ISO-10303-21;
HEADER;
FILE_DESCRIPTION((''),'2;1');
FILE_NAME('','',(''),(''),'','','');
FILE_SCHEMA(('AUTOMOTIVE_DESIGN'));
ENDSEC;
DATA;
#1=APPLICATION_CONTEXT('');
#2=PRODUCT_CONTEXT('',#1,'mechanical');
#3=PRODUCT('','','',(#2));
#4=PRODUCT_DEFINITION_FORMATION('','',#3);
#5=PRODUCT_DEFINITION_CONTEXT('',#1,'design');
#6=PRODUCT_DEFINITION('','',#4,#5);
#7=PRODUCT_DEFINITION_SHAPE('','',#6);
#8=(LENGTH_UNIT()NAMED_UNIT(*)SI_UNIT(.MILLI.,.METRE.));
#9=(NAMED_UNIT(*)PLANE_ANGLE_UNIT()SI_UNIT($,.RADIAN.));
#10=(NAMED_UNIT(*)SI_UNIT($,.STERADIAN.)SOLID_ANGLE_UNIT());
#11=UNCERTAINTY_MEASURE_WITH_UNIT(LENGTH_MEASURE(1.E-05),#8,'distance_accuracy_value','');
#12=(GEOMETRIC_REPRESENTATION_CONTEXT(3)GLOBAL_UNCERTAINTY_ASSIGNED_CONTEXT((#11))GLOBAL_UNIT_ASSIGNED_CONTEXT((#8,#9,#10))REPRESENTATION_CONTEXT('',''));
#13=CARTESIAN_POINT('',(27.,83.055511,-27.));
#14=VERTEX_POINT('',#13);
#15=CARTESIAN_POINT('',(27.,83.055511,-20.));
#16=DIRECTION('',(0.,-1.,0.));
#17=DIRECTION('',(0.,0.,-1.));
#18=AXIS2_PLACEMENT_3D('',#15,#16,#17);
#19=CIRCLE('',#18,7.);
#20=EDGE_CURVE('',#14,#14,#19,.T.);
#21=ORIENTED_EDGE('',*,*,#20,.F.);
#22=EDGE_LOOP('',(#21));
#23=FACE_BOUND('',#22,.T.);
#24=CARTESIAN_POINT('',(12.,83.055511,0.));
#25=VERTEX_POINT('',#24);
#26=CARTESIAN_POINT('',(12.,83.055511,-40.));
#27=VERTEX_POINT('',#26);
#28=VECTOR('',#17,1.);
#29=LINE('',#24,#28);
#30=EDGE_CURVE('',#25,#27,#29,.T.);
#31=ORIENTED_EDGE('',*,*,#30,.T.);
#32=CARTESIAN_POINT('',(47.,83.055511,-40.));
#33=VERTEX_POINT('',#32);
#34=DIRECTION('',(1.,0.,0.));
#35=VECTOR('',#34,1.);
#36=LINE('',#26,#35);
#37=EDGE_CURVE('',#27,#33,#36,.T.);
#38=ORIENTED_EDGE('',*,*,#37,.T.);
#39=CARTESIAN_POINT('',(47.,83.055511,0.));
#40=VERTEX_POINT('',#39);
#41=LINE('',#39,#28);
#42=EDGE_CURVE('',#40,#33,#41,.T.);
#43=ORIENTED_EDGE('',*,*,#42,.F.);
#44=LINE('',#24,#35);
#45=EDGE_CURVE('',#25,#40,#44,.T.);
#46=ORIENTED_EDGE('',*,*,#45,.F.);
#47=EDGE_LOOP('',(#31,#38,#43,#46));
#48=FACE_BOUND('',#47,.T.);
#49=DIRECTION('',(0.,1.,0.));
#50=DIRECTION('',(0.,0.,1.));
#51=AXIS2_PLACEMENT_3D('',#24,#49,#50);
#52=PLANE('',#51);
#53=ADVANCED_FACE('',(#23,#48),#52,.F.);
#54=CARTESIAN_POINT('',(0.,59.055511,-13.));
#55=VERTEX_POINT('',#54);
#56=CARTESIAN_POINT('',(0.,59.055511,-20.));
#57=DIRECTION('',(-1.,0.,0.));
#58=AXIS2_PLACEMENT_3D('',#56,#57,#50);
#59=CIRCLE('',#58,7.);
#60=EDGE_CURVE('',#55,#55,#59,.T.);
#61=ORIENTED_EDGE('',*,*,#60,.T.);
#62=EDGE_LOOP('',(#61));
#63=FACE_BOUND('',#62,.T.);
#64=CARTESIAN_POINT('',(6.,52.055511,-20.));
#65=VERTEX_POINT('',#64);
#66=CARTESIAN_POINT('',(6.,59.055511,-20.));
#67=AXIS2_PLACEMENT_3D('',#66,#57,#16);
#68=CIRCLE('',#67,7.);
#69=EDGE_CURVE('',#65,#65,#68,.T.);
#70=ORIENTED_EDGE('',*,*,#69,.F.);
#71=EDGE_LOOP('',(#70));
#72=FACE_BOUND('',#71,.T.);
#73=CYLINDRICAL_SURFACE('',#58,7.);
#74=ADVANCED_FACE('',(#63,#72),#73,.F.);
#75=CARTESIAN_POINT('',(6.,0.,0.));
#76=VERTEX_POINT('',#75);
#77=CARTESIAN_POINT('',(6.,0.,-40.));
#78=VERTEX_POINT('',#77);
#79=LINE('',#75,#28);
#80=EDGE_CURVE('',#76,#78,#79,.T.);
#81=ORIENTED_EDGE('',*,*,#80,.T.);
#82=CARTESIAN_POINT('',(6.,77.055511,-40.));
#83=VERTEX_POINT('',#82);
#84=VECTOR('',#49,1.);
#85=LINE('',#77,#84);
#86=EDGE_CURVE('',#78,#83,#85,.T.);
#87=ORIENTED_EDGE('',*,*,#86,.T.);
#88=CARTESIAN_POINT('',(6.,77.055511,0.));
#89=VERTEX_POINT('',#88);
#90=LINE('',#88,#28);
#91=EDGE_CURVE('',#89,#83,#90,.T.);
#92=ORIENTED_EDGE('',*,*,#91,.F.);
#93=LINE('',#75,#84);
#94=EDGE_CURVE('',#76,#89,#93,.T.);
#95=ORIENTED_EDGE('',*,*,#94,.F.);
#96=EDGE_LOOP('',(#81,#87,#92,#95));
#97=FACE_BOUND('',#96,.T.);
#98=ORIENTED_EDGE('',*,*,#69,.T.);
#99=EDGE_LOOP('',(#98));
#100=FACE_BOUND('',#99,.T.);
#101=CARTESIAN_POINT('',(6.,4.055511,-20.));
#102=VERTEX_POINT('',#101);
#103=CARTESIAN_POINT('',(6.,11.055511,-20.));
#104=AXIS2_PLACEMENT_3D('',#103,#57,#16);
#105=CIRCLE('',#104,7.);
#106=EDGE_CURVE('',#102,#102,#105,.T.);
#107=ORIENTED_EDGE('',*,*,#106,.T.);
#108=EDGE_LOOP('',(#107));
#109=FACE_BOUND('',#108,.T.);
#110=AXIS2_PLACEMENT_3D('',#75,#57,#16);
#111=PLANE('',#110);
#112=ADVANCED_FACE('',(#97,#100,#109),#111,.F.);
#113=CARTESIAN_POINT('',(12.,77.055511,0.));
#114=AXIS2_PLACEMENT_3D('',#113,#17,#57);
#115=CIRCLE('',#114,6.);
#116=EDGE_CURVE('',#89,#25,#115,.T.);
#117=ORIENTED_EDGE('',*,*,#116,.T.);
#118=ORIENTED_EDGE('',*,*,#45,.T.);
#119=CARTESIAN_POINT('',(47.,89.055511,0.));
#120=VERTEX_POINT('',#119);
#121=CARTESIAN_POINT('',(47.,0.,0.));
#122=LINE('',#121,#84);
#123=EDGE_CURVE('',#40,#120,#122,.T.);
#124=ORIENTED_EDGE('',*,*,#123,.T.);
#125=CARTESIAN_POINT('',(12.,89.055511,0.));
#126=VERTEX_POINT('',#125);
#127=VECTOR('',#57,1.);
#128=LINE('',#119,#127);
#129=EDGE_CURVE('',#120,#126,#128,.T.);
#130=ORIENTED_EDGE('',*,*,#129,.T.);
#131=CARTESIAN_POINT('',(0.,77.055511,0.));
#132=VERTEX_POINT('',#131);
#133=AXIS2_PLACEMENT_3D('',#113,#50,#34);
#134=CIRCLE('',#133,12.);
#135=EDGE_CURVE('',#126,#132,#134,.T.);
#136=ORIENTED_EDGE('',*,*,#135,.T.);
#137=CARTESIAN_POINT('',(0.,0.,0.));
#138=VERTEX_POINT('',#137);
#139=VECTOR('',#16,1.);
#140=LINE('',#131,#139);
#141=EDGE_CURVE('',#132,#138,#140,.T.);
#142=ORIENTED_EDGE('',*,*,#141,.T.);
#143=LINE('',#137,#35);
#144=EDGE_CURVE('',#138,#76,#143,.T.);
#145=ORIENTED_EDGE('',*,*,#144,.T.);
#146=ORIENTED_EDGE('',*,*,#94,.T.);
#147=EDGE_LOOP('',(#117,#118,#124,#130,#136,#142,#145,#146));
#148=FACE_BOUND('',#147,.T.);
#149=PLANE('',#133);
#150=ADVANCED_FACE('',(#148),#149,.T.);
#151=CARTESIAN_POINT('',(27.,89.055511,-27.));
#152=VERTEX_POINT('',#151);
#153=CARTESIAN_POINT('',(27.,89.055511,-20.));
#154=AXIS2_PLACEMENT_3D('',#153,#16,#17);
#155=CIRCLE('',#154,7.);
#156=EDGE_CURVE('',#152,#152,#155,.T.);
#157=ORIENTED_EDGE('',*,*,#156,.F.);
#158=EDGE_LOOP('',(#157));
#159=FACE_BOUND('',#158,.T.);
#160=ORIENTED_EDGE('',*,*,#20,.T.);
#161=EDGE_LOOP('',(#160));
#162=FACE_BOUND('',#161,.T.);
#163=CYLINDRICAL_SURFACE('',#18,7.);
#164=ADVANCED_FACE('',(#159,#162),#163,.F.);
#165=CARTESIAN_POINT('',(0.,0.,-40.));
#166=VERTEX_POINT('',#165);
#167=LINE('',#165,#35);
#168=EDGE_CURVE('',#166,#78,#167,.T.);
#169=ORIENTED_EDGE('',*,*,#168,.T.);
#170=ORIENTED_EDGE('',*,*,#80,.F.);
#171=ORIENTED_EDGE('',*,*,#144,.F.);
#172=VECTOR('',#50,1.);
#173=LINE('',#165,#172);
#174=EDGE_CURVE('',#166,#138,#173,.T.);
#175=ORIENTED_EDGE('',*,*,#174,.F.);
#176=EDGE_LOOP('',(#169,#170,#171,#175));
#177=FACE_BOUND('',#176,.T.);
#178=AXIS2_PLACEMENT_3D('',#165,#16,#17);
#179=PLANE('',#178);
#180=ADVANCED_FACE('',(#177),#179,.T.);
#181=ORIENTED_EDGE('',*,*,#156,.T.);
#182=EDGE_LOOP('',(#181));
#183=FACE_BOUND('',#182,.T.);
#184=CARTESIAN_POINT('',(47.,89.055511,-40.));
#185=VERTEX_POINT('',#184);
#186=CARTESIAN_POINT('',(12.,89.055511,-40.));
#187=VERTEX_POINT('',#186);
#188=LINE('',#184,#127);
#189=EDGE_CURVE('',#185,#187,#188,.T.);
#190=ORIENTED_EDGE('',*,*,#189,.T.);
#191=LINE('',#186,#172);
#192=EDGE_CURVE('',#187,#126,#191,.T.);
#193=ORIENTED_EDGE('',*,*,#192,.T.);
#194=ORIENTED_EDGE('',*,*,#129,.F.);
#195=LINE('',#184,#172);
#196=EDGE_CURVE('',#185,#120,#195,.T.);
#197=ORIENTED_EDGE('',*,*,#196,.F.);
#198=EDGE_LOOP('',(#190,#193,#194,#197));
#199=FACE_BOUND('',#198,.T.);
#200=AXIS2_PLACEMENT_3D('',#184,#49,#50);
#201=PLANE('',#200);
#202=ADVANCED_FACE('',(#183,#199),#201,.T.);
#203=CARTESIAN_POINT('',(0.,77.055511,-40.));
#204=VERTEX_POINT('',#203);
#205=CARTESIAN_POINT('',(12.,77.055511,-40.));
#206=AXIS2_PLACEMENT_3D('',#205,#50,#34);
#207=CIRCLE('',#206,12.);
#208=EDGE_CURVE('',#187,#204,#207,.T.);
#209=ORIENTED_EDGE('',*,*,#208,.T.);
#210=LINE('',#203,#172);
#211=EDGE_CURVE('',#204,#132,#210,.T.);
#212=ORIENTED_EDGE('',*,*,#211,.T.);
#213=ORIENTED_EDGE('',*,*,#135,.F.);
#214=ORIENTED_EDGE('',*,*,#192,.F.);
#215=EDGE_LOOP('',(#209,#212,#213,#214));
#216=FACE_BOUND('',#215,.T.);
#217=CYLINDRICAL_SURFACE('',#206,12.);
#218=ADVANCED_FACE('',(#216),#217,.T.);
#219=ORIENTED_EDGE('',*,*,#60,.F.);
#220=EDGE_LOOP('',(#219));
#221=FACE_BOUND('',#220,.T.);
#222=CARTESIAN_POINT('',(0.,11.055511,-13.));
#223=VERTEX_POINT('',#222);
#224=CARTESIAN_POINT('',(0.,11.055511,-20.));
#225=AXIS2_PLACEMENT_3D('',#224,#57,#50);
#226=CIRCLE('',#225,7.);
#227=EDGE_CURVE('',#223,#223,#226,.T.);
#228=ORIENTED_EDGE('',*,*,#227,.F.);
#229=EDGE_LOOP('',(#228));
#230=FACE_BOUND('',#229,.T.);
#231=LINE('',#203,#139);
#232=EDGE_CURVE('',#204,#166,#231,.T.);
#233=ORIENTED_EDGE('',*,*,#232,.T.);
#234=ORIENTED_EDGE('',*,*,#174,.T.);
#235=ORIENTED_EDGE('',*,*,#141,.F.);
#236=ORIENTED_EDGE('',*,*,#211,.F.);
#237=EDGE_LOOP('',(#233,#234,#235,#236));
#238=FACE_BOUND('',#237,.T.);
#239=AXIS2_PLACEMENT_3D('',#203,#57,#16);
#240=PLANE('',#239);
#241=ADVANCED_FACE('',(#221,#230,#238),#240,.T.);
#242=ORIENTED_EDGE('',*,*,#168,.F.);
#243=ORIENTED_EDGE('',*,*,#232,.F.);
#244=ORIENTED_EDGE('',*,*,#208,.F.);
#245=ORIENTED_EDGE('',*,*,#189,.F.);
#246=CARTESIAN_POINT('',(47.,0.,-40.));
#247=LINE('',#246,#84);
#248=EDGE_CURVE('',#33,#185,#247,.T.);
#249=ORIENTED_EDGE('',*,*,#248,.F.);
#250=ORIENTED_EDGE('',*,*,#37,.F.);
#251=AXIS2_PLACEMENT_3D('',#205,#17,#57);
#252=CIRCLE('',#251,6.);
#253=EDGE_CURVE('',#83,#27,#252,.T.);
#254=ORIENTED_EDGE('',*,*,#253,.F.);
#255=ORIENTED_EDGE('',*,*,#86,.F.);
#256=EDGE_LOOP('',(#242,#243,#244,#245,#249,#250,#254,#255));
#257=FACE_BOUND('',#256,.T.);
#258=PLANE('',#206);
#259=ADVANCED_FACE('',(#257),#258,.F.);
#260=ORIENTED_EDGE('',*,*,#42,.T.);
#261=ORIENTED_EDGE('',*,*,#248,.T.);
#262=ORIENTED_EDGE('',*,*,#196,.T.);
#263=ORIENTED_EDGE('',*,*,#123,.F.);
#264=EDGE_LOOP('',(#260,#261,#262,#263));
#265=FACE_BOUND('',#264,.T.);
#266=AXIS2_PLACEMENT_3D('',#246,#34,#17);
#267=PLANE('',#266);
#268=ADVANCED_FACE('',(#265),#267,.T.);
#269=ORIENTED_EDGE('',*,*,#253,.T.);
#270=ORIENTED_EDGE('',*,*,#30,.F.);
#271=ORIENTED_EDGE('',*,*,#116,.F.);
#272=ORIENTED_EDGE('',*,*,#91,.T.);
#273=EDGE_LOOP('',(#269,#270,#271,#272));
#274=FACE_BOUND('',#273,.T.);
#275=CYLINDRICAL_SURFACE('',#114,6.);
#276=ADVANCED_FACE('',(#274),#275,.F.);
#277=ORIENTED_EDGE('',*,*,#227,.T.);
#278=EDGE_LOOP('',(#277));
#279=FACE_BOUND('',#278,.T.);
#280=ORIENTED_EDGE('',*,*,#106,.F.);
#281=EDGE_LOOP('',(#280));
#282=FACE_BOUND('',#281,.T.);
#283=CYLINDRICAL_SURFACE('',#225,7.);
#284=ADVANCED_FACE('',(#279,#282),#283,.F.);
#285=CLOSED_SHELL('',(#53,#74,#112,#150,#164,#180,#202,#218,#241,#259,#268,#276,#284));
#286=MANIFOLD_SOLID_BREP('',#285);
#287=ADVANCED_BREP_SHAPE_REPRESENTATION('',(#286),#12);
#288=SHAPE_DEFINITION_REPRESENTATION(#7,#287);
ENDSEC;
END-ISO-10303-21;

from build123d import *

# Parameters (mm, degrees)
BASE_FLANGE1_DEPTH             = 40
CUT_EXTRUDE1_DEPTH             = 109.350745652
F_14_0_14_DIAMETER_HOLE1_D     = 14
F_14_0_14_DIAMETER_HOLE1_DEPTH = 47
F_14_0_14_DIAMETER_HOLE2_D     = 14


# Sheet-metal steps are written as plain solids
with BuildPart() as part:
    # Sketch7 → Base-Flange1 (new body)
    with BuildSketch(Plane.XY):
        with BuildLine():
            Line((0, 0), (47, 0))
            Line((47, 0), (47, 89.055511246))
            Line((47, 89.055511246), (12, 89.055511246))
            ThreePointArc((12, 89.055511246), (3.514718626, 85.54079262), (0, 77.055511246))
            Line((0, 77.055511246), (0, 0))
        make_face()
    extrude(amount=-BASE_FLANGE1_DEPTH)

    # Sketch10 → Cut-Extrude1 (cut, through all)
    with BuildSketch(Plane(origin=(0, 0, -40), x_dir=(-1, 0, 0), z_dir=(0, 0, -1))):
        with BuildLine():
            Line((-12, 83.055511246), (-47, 83.055511246))
            Line((-47, 83.055511246), (-47, 0))
            Line((-47, 0), (-6, 0))
            Line((-6, 0), (-6, 77.055511246))
            ThreePointArc((-6, 77.055511246), (-7.757359313, 81.298151933), (-12, 83.055511246))
        make_face()
    extrude(amount=-CUT_EXTRUDE1_DEPTH, mode=Mode.SUBTRACT)

    # Ø14.0 (14) Diameter Hole1
    with Locations(Plane.ZY):
        with Locations((-20, 59.055511246), (-20, 11.055511246)):
            Hole(F_14_0_14_DIAMETER_HOLE1_D / 2, depth=F_14_0_14_DIAMETER_HOLE1_DEPTH)

    # Ø14.0 (14) Diameter Hole2 (through all)
    with Locations(Plane(origin=(0, 83.055511246, 0), x_dir=(-1, 0, 0), z_dir=(0, -1, 0))):
        with Locations((-27, 20)):
            Hole(F_14_0_14_DIAMETER_HOLE2_D / 2)


solid = part.part
